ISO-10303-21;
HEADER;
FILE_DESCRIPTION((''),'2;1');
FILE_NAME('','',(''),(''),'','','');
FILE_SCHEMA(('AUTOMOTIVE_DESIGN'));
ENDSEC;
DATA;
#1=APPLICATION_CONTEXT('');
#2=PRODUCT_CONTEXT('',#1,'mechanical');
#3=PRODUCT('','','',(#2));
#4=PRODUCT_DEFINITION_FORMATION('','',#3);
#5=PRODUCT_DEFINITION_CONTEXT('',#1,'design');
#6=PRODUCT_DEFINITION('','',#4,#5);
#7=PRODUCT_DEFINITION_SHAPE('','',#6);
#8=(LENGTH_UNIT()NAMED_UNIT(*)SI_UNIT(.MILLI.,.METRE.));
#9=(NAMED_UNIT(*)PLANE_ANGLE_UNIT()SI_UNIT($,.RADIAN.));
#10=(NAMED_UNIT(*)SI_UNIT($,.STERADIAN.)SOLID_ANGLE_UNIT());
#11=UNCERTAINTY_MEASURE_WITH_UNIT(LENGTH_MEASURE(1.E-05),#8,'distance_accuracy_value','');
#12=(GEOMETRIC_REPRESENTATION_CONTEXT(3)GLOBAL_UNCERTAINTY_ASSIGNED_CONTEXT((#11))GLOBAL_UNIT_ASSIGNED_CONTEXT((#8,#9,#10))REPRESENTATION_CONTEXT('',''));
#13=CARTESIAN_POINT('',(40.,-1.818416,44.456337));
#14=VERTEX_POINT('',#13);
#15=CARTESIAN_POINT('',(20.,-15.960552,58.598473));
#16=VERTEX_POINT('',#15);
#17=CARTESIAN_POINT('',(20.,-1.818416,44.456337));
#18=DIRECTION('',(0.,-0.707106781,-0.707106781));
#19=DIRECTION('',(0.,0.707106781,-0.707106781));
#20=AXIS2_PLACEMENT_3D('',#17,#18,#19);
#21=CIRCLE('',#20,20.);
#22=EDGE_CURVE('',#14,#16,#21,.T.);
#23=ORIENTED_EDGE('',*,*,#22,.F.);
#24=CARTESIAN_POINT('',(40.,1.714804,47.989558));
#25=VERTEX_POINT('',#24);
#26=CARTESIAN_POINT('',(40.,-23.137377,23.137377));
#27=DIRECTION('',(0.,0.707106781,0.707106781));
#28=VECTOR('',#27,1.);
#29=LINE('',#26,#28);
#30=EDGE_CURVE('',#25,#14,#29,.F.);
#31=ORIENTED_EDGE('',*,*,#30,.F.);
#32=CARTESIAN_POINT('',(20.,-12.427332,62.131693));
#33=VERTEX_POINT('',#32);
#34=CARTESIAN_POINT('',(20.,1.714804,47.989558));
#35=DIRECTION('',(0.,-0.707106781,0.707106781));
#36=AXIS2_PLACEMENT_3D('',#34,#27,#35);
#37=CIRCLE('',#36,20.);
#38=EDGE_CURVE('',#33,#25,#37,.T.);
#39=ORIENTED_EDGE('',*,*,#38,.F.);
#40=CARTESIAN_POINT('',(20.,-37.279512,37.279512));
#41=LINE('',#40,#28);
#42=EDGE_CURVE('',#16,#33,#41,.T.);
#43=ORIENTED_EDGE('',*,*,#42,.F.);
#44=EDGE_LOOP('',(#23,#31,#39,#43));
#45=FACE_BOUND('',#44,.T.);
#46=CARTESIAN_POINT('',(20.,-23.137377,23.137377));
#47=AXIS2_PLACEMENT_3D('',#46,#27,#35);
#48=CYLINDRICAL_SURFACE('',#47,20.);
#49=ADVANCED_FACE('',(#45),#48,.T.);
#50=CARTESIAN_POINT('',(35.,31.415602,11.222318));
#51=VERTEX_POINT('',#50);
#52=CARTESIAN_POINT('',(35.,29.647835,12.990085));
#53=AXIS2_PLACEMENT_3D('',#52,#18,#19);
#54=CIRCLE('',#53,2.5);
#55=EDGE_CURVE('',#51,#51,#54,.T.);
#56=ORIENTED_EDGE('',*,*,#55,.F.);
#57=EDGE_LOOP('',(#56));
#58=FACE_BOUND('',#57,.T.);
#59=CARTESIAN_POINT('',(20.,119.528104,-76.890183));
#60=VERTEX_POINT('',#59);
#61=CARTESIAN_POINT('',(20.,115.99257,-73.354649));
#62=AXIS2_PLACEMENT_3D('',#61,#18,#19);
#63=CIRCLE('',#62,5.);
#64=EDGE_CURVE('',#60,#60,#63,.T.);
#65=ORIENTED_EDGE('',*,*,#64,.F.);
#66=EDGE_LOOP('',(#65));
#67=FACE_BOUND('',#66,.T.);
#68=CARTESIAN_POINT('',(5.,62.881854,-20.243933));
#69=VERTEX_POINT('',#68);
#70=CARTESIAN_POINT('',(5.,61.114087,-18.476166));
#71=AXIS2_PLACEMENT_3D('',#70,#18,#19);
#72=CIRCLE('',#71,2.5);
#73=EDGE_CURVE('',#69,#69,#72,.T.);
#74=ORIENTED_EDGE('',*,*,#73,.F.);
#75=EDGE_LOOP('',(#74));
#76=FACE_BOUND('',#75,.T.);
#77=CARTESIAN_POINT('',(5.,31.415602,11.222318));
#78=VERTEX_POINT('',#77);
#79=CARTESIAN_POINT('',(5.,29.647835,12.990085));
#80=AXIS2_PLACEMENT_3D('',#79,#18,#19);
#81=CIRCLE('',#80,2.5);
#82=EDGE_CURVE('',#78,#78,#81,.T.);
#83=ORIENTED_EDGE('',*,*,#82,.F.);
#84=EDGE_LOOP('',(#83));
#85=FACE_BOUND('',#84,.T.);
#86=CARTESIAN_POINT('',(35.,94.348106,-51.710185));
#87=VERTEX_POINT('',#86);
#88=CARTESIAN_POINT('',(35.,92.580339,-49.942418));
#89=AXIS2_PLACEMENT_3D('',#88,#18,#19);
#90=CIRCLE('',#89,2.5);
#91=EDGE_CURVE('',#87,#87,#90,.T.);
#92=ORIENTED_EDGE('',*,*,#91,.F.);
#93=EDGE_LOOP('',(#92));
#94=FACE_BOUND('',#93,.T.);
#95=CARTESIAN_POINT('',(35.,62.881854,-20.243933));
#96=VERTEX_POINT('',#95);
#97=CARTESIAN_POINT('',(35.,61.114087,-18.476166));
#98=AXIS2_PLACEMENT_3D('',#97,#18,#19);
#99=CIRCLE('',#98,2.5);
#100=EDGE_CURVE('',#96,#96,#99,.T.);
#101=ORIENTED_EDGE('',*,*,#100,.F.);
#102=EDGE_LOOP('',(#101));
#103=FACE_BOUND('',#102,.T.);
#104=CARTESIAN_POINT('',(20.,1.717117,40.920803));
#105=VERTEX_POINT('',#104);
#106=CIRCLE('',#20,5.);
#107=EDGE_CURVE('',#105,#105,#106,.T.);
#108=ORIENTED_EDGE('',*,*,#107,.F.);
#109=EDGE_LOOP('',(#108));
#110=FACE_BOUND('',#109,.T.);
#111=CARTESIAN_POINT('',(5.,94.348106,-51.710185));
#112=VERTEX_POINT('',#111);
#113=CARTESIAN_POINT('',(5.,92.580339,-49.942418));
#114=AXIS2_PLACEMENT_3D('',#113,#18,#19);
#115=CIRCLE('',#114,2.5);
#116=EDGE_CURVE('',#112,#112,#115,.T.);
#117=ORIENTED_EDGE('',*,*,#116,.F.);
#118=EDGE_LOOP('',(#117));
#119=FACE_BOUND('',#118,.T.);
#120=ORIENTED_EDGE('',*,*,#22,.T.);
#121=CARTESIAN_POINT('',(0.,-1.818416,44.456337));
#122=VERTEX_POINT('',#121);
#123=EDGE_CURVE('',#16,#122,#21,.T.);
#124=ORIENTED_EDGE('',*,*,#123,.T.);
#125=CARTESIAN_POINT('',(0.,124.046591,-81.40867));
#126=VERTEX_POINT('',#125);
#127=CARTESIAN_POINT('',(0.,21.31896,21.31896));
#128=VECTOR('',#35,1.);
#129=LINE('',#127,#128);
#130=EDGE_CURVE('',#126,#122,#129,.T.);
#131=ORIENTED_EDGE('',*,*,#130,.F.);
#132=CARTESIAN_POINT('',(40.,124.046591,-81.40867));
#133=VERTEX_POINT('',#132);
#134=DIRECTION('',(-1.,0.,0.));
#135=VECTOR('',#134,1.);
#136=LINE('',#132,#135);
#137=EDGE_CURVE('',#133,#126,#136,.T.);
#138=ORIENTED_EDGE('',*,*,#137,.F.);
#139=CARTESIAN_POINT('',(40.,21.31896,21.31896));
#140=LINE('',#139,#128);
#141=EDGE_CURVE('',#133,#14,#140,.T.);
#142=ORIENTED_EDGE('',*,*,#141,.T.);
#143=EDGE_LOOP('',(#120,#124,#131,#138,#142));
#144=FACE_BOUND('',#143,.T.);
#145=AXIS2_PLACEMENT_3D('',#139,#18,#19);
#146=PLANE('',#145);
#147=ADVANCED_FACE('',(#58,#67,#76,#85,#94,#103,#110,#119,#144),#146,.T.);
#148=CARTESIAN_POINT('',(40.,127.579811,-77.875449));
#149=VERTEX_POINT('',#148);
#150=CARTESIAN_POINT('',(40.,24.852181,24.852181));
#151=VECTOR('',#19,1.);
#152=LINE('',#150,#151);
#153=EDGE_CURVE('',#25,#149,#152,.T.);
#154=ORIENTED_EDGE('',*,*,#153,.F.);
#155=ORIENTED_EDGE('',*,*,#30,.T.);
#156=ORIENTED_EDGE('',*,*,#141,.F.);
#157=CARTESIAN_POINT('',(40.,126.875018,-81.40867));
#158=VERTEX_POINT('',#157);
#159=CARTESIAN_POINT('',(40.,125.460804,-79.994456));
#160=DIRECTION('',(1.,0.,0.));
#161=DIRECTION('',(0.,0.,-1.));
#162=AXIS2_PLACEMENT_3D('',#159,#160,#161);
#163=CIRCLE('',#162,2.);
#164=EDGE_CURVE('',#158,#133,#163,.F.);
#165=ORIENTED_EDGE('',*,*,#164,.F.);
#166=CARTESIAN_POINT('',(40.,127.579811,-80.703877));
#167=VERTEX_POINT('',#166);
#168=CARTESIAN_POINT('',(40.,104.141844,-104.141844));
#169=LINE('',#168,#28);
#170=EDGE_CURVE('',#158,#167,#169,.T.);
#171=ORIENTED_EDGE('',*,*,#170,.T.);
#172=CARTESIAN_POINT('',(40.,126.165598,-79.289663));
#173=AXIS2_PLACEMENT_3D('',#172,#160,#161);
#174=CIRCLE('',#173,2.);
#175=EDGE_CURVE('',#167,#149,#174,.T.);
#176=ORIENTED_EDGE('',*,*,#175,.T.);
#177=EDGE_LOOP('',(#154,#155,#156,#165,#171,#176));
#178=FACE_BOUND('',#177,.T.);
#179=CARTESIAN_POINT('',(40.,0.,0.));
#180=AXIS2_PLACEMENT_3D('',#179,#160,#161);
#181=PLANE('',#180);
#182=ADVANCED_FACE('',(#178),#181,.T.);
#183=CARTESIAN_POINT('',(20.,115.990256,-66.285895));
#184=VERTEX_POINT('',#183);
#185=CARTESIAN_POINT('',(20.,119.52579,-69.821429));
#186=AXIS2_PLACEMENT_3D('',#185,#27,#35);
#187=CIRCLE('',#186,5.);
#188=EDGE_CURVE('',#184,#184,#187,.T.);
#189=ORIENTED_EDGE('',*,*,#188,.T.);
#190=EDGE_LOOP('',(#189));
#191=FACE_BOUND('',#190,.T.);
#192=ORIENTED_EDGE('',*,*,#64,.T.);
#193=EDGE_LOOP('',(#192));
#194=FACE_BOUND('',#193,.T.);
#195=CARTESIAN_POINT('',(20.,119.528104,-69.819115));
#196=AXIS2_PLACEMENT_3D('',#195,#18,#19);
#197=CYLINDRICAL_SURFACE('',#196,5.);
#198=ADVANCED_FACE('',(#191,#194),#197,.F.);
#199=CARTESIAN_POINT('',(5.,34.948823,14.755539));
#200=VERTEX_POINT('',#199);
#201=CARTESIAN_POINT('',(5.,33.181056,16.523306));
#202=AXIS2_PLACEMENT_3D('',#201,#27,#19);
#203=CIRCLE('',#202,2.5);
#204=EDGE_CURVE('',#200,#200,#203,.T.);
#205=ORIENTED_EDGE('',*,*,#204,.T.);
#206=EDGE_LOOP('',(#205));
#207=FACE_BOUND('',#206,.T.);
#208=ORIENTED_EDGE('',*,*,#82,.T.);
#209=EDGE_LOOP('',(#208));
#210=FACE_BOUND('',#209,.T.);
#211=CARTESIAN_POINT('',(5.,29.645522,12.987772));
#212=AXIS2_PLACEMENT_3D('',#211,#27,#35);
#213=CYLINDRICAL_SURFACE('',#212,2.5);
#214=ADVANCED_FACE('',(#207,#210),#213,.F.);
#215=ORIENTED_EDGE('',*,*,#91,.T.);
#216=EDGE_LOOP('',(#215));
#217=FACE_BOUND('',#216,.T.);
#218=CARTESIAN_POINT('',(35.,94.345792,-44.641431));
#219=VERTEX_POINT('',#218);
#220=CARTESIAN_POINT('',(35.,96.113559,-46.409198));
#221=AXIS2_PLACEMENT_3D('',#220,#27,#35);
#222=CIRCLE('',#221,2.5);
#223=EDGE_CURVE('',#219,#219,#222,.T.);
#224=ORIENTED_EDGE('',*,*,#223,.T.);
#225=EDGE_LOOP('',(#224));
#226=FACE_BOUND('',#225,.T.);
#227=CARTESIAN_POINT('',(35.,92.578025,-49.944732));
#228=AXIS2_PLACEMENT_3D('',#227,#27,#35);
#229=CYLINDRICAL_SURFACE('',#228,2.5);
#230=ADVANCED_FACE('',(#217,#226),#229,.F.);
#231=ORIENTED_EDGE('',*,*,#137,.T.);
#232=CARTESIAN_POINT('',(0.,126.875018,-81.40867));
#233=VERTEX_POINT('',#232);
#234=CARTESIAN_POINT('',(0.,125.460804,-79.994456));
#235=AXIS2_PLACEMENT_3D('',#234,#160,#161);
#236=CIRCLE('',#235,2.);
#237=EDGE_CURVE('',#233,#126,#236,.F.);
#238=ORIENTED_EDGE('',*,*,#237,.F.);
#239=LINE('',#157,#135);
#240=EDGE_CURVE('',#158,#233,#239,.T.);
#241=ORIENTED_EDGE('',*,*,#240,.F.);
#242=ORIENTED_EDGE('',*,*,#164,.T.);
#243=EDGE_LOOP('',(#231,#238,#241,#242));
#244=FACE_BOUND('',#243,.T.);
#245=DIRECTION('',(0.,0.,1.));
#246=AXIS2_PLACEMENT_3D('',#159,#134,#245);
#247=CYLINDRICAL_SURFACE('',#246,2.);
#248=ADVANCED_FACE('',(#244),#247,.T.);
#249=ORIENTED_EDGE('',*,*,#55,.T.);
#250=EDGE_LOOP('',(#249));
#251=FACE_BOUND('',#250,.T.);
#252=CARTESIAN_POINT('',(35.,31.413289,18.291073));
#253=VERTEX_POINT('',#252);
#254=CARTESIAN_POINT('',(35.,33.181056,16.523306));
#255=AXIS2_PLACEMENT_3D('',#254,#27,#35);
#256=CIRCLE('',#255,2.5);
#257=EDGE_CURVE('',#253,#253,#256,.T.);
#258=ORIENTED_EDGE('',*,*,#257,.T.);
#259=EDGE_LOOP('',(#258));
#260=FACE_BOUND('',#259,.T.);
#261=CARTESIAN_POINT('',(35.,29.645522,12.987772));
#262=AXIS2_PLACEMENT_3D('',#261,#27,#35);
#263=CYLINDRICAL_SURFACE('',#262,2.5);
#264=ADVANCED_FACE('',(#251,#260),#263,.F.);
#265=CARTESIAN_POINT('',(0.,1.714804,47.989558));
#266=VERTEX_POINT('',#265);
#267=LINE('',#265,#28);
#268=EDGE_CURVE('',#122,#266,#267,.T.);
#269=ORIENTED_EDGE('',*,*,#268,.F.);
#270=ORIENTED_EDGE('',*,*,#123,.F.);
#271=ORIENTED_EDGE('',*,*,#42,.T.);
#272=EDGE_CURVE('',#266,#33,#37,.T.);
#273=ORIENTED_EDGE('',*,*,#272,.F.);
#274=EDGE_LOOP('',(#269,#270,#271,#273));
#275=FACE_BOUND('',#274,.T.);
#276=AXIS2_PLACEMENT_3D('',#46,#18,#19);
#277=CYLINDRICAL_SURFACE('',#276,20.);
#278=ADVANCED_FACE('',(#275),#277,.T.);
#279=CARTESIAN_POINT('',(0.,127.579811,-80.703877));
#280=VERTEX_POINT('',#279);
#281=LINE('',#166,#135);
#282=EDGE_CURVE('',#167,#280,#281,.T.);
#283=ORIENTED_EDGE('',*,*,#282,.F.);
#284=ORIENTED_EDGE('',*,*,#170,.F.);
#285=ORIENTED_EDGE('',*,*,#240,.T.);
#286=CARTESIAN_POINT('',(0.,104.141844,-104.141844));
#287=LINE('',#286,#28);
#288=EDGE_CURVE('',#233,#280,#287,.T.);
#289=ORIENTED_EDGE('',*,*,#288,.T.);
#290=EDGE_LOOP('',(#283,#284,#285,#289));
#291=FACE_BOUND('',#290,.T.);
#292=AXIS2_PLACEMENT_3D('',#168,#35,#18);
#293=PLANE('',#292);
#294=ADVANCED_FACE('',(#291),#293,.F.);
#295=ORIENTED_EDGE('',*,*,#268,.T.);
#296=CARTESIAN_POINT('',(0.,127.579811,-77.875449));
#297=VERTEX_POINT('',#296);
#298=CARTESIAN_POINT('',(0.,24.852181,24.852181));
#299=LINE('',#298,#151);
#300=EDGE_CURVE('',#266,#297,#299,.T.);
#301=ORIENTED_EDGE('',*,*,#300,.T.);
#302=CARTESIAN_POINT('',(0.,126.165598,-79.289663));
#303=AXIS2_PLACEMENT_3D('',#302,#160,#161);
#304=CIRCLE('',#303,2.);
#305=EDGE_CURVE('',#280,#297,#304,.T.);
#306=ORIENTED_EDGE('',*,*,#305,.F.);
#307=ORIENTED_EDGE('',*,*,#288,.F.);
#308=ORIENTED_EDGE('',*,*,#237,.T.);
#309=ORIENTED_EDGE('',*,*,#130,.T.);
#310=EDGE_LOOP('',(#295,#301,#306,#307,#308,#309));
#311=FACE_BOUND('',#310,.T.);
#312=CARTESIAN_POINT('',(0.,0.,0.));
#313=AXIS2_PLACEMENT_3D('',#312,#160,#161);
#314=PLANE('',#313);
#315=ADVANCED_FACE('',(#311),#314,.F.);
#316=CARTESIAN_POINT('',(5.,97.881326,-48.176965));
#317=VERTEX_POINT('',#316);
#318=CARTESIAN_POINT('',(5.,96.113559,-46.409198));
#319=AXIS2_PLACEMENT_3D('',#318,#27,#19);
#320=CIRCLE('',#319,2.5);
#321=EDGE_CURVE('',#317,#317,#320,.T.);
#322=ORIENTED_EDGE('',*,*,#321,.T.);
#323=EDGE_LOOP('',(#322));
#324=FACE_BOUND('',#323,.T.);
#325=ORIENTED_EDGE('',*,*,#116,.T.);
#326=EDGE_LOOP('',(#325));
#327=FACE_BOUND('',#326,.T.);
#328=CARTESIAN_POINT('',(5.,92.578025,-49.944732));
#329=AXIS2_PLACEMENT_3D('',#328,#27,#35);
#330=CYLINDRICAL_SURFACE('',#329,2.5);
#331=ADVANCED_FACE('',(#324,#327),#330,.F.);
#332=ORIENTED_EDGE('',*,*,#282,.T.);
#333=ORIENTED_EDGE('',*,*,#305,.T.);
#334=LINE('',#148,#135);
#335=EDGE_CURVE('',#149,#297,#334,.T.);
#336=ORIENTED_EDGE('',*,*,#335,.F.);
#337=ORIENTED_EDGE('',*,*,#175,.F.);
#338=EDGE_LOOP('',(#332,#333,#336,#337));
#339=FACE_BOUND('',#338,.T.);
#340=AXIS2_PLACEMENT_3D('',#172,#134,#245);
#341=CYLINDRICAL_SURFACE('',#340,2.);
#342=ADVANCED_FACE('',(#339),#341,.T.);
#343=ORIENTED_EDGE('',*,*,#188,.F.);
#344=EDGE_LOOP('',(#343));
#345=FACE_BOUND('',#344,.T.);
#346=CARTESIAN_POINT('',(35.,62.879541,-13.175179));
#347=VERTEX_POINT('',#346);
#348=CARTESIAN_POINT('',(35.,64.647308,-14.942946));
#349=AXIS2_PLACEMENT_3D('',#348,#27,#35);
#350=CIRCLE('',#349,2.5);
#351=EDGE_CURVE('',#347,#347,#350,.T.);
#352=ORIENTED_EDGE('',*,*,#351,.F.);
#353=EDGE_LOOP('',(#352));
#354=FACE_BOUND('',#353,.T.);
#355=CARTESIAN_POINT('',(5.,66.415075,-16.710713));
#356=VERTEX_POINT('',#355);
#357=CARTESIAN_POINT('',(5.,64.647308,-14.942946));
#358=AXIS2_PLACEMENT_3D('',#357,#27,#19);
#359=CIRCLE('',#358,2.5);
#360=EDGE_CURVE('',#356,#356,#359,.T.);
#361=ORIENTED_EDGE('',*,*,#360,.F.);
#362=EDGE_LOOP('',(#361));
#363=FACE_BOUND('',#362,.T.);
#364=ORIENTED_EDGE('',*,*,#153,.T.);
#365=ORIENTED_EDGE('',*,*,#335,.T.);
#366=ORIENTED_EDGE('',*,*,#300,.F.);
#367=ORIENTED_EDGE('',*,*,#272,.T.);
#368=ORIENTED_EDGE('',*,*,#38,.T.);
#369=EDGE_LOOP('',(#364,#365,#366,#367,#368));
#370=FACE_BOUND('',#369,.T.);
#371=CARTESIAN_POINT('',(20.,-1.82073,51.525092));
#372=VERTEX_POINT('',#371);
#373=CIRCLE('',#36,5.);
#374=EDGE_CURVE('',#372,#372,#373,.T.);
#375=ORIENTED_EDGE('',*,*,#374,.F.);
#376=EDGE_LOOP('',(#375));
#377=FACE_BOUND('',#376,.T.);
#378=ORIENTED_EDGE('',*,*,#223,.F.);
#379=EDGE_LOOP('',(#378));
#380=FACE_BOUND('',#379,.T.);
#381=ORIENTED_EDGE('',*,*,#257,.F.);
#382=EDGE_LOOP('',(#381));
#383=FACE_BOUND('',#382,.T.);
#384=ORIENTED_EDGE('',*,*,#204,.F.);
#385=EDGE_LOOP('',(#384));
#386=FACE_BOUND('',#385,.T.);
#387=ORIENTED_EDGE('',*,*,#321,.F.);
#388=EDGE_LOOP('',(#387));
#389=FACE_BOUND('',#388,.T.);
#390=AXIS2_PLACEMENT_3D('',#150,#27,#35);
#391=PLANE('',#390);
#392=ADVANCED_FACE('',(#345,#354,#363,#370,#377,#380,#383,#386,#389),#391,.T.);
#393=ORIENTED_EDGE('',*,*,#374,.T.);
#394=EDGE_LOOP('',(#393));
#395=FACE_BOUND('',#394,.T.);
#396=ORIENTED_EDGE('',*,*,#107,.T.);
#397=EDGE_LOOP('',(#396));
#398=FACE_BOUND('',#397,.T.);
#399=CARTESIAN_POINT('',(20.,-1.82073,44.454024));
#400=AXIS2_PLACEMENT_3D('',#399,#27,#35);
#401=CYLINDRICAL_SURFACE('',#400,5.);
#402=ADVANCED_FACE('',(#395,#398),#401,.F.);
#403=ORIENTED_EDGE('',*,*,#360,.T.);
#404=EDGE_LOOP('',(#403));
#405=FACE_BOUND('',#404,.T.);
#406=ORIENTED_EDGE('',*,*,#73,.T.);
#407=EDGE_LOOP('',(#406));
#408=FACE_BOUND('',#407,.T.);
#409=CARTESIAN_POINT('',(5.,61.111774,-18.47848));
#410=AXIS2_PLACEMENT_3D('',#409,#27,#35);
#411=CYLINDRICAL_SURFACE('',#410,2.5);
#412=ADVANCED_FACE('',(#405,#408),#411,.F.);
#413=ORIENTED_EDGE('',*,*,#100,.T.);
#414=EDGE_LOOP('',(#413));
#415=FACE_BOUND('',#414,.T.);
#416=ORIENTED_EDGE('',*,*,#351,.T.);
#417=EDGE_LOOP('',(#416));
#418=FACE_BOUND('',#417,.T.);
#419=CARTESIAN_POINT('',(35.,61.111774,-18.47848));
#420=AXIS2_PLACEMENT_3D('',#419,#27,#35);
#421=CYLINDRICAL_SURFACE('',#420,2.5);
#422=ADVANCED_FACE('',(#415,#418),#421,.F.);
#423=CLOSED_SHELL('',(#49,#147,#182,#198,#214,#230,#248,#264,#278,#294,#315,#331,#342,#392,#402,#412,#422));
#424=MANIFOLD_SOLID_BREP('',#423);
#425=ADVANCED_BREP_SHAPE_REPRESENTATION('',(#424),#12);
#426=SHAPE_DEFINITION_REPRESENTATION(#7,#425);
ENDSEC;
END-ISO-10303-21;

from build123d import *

# Parameters (mm, degrees)
BOSS_EXTRUDE1_DEPTH = 40
FILLET3_R           = 20
FILLET4_R           = 20
SKETCH2_R           = 5
SKETCH2_R_2         = 2.5
CUT_EXTRUDE1_DEPTH  = 5
SKETCH3_R           = 5
CUT_EXTRUDE2_DEPTH  = 5


with BuildPart() as part:
    # Sketch1 → Boss-Extrude1 (new body)
    with BuildSketch(Plane(origin=(0, 0, 0), x_dir=(0, 0, -1), z_dir=(1, 0, 0))):
        with BuildLine():
            Line((-58.598472687, -15.960552102), (-57.184259125, -14.54633854))
            Line((-57.184259125, -14.54633854), (-34.253623627, 8.384296958))
            Line((-34.253623627, 8.384296958), (81.408669988, 124.046590573))
            ThreePointArc((81.408669988, 124.046590573), (81.994456425, 125.460804135), (81.408669988, 126.875017697))
            Line((81.408669988, 126.875017697), (80.703876553, 127.579811132))
            ThreePointArc((80.703876553, 127.579811132), (79.289662991, 128.165597569), (77.875449429, 127.579811132))
            Line((77.875449429, 127.579811132), (-37.786844186, 11.917517517))
            Line((-37.786844186, 11.917517517), (-60.717479684, -11.013117981))
            Line((-60.717479684, -11.013117981), (-62.131693246, -12.427331543))
            Line((-62.131693246, -12.427331543), (-60.717479684, -13.841545106))
            Line((-60.717479684, -13.841545106), (-60.01268625, -14.54633854))
            Line((-60.01268625, -14.54633854), (-58.598472687, -15.960552102))
        make_face()
    extrude(amount=BOSS_EXTRUDE1_DEPTH)

    # Fillet3
    fillet3_edges = [part.edges().sort_by_distance(p)[0] for p in [
        (40, -14.193941823, 60.365082967),
    ]]
    fillet(fillet3_edges, radius=FILLET3_R)

    # Fillet4
    fillet4_edges = [part.edges().sort_by_distance(p)[0] for p in [
        (0, -14.193941823, 60.365082967),
    ]]
    fillet(fillet4_edges, radius=FILLET4_R - 0.0001)  # a hair under: the kernel refuses the full size

    # Sketch2 → Cut-Extrude1 (cut)
    with BuildSketch(Plane(origin=(0, 24.852180852, 24.852180852), x_dir=(1, 0, 0), z_dir=(0, 0.7071067811865465, 0.7071067811865487))):
        with Locations(Location((20, -32.721192027, 0), (0, 0, 270))):
            Circle(SKETCH2_R)
        with Locations(Location((35, 100.778807973, 0), (0, 0, 270))):
            Circle(SKETCH2_R_2)
        with Locations(Location((35, 56.278807973, 0), (0, 0, 270))):
            Circle(SKETCH2_R_2)
        with Locations(Location((35, 11.778807973, 0), (0, 0, 270))):
            Circle(SKETCH2_R_2)
        with Locations(Location((5, 11.778807973, 0), (0, 0, 90))):
            Circle(SKETCH2_R_2)
        with Locations(Location((5, 56.278807973, 0), (0, 0, 90))):
            Circle(SKETCH2_R_2)
        with Locations(Location((5, 100.778807973, 0), (0, 0, 90))):
            Circle(SKETCH2_R_2)
    extrude(amount=-CUT_EXTRUDE1_DEPTH, mode=Mode.SUBTRACT)

    # Sketch3 → Cut-Extrude2 (cut)
    with BuildSketch(Plane(origin=(0, 21.318960292, 21.318960292), x_dir=(1, 0, 0), z_dir=(0, -0.7071067811865434, -0.7071067811865518))):
        with Locations(Location((20, -133.888702436, 0), (0, 0, 270))):
            Circle(SKETCH3_R)
    extrude(amount=-CUT_EXTRUDE2_DEPTH, mode=Mode.SUBTRACT)


solid = part.part
